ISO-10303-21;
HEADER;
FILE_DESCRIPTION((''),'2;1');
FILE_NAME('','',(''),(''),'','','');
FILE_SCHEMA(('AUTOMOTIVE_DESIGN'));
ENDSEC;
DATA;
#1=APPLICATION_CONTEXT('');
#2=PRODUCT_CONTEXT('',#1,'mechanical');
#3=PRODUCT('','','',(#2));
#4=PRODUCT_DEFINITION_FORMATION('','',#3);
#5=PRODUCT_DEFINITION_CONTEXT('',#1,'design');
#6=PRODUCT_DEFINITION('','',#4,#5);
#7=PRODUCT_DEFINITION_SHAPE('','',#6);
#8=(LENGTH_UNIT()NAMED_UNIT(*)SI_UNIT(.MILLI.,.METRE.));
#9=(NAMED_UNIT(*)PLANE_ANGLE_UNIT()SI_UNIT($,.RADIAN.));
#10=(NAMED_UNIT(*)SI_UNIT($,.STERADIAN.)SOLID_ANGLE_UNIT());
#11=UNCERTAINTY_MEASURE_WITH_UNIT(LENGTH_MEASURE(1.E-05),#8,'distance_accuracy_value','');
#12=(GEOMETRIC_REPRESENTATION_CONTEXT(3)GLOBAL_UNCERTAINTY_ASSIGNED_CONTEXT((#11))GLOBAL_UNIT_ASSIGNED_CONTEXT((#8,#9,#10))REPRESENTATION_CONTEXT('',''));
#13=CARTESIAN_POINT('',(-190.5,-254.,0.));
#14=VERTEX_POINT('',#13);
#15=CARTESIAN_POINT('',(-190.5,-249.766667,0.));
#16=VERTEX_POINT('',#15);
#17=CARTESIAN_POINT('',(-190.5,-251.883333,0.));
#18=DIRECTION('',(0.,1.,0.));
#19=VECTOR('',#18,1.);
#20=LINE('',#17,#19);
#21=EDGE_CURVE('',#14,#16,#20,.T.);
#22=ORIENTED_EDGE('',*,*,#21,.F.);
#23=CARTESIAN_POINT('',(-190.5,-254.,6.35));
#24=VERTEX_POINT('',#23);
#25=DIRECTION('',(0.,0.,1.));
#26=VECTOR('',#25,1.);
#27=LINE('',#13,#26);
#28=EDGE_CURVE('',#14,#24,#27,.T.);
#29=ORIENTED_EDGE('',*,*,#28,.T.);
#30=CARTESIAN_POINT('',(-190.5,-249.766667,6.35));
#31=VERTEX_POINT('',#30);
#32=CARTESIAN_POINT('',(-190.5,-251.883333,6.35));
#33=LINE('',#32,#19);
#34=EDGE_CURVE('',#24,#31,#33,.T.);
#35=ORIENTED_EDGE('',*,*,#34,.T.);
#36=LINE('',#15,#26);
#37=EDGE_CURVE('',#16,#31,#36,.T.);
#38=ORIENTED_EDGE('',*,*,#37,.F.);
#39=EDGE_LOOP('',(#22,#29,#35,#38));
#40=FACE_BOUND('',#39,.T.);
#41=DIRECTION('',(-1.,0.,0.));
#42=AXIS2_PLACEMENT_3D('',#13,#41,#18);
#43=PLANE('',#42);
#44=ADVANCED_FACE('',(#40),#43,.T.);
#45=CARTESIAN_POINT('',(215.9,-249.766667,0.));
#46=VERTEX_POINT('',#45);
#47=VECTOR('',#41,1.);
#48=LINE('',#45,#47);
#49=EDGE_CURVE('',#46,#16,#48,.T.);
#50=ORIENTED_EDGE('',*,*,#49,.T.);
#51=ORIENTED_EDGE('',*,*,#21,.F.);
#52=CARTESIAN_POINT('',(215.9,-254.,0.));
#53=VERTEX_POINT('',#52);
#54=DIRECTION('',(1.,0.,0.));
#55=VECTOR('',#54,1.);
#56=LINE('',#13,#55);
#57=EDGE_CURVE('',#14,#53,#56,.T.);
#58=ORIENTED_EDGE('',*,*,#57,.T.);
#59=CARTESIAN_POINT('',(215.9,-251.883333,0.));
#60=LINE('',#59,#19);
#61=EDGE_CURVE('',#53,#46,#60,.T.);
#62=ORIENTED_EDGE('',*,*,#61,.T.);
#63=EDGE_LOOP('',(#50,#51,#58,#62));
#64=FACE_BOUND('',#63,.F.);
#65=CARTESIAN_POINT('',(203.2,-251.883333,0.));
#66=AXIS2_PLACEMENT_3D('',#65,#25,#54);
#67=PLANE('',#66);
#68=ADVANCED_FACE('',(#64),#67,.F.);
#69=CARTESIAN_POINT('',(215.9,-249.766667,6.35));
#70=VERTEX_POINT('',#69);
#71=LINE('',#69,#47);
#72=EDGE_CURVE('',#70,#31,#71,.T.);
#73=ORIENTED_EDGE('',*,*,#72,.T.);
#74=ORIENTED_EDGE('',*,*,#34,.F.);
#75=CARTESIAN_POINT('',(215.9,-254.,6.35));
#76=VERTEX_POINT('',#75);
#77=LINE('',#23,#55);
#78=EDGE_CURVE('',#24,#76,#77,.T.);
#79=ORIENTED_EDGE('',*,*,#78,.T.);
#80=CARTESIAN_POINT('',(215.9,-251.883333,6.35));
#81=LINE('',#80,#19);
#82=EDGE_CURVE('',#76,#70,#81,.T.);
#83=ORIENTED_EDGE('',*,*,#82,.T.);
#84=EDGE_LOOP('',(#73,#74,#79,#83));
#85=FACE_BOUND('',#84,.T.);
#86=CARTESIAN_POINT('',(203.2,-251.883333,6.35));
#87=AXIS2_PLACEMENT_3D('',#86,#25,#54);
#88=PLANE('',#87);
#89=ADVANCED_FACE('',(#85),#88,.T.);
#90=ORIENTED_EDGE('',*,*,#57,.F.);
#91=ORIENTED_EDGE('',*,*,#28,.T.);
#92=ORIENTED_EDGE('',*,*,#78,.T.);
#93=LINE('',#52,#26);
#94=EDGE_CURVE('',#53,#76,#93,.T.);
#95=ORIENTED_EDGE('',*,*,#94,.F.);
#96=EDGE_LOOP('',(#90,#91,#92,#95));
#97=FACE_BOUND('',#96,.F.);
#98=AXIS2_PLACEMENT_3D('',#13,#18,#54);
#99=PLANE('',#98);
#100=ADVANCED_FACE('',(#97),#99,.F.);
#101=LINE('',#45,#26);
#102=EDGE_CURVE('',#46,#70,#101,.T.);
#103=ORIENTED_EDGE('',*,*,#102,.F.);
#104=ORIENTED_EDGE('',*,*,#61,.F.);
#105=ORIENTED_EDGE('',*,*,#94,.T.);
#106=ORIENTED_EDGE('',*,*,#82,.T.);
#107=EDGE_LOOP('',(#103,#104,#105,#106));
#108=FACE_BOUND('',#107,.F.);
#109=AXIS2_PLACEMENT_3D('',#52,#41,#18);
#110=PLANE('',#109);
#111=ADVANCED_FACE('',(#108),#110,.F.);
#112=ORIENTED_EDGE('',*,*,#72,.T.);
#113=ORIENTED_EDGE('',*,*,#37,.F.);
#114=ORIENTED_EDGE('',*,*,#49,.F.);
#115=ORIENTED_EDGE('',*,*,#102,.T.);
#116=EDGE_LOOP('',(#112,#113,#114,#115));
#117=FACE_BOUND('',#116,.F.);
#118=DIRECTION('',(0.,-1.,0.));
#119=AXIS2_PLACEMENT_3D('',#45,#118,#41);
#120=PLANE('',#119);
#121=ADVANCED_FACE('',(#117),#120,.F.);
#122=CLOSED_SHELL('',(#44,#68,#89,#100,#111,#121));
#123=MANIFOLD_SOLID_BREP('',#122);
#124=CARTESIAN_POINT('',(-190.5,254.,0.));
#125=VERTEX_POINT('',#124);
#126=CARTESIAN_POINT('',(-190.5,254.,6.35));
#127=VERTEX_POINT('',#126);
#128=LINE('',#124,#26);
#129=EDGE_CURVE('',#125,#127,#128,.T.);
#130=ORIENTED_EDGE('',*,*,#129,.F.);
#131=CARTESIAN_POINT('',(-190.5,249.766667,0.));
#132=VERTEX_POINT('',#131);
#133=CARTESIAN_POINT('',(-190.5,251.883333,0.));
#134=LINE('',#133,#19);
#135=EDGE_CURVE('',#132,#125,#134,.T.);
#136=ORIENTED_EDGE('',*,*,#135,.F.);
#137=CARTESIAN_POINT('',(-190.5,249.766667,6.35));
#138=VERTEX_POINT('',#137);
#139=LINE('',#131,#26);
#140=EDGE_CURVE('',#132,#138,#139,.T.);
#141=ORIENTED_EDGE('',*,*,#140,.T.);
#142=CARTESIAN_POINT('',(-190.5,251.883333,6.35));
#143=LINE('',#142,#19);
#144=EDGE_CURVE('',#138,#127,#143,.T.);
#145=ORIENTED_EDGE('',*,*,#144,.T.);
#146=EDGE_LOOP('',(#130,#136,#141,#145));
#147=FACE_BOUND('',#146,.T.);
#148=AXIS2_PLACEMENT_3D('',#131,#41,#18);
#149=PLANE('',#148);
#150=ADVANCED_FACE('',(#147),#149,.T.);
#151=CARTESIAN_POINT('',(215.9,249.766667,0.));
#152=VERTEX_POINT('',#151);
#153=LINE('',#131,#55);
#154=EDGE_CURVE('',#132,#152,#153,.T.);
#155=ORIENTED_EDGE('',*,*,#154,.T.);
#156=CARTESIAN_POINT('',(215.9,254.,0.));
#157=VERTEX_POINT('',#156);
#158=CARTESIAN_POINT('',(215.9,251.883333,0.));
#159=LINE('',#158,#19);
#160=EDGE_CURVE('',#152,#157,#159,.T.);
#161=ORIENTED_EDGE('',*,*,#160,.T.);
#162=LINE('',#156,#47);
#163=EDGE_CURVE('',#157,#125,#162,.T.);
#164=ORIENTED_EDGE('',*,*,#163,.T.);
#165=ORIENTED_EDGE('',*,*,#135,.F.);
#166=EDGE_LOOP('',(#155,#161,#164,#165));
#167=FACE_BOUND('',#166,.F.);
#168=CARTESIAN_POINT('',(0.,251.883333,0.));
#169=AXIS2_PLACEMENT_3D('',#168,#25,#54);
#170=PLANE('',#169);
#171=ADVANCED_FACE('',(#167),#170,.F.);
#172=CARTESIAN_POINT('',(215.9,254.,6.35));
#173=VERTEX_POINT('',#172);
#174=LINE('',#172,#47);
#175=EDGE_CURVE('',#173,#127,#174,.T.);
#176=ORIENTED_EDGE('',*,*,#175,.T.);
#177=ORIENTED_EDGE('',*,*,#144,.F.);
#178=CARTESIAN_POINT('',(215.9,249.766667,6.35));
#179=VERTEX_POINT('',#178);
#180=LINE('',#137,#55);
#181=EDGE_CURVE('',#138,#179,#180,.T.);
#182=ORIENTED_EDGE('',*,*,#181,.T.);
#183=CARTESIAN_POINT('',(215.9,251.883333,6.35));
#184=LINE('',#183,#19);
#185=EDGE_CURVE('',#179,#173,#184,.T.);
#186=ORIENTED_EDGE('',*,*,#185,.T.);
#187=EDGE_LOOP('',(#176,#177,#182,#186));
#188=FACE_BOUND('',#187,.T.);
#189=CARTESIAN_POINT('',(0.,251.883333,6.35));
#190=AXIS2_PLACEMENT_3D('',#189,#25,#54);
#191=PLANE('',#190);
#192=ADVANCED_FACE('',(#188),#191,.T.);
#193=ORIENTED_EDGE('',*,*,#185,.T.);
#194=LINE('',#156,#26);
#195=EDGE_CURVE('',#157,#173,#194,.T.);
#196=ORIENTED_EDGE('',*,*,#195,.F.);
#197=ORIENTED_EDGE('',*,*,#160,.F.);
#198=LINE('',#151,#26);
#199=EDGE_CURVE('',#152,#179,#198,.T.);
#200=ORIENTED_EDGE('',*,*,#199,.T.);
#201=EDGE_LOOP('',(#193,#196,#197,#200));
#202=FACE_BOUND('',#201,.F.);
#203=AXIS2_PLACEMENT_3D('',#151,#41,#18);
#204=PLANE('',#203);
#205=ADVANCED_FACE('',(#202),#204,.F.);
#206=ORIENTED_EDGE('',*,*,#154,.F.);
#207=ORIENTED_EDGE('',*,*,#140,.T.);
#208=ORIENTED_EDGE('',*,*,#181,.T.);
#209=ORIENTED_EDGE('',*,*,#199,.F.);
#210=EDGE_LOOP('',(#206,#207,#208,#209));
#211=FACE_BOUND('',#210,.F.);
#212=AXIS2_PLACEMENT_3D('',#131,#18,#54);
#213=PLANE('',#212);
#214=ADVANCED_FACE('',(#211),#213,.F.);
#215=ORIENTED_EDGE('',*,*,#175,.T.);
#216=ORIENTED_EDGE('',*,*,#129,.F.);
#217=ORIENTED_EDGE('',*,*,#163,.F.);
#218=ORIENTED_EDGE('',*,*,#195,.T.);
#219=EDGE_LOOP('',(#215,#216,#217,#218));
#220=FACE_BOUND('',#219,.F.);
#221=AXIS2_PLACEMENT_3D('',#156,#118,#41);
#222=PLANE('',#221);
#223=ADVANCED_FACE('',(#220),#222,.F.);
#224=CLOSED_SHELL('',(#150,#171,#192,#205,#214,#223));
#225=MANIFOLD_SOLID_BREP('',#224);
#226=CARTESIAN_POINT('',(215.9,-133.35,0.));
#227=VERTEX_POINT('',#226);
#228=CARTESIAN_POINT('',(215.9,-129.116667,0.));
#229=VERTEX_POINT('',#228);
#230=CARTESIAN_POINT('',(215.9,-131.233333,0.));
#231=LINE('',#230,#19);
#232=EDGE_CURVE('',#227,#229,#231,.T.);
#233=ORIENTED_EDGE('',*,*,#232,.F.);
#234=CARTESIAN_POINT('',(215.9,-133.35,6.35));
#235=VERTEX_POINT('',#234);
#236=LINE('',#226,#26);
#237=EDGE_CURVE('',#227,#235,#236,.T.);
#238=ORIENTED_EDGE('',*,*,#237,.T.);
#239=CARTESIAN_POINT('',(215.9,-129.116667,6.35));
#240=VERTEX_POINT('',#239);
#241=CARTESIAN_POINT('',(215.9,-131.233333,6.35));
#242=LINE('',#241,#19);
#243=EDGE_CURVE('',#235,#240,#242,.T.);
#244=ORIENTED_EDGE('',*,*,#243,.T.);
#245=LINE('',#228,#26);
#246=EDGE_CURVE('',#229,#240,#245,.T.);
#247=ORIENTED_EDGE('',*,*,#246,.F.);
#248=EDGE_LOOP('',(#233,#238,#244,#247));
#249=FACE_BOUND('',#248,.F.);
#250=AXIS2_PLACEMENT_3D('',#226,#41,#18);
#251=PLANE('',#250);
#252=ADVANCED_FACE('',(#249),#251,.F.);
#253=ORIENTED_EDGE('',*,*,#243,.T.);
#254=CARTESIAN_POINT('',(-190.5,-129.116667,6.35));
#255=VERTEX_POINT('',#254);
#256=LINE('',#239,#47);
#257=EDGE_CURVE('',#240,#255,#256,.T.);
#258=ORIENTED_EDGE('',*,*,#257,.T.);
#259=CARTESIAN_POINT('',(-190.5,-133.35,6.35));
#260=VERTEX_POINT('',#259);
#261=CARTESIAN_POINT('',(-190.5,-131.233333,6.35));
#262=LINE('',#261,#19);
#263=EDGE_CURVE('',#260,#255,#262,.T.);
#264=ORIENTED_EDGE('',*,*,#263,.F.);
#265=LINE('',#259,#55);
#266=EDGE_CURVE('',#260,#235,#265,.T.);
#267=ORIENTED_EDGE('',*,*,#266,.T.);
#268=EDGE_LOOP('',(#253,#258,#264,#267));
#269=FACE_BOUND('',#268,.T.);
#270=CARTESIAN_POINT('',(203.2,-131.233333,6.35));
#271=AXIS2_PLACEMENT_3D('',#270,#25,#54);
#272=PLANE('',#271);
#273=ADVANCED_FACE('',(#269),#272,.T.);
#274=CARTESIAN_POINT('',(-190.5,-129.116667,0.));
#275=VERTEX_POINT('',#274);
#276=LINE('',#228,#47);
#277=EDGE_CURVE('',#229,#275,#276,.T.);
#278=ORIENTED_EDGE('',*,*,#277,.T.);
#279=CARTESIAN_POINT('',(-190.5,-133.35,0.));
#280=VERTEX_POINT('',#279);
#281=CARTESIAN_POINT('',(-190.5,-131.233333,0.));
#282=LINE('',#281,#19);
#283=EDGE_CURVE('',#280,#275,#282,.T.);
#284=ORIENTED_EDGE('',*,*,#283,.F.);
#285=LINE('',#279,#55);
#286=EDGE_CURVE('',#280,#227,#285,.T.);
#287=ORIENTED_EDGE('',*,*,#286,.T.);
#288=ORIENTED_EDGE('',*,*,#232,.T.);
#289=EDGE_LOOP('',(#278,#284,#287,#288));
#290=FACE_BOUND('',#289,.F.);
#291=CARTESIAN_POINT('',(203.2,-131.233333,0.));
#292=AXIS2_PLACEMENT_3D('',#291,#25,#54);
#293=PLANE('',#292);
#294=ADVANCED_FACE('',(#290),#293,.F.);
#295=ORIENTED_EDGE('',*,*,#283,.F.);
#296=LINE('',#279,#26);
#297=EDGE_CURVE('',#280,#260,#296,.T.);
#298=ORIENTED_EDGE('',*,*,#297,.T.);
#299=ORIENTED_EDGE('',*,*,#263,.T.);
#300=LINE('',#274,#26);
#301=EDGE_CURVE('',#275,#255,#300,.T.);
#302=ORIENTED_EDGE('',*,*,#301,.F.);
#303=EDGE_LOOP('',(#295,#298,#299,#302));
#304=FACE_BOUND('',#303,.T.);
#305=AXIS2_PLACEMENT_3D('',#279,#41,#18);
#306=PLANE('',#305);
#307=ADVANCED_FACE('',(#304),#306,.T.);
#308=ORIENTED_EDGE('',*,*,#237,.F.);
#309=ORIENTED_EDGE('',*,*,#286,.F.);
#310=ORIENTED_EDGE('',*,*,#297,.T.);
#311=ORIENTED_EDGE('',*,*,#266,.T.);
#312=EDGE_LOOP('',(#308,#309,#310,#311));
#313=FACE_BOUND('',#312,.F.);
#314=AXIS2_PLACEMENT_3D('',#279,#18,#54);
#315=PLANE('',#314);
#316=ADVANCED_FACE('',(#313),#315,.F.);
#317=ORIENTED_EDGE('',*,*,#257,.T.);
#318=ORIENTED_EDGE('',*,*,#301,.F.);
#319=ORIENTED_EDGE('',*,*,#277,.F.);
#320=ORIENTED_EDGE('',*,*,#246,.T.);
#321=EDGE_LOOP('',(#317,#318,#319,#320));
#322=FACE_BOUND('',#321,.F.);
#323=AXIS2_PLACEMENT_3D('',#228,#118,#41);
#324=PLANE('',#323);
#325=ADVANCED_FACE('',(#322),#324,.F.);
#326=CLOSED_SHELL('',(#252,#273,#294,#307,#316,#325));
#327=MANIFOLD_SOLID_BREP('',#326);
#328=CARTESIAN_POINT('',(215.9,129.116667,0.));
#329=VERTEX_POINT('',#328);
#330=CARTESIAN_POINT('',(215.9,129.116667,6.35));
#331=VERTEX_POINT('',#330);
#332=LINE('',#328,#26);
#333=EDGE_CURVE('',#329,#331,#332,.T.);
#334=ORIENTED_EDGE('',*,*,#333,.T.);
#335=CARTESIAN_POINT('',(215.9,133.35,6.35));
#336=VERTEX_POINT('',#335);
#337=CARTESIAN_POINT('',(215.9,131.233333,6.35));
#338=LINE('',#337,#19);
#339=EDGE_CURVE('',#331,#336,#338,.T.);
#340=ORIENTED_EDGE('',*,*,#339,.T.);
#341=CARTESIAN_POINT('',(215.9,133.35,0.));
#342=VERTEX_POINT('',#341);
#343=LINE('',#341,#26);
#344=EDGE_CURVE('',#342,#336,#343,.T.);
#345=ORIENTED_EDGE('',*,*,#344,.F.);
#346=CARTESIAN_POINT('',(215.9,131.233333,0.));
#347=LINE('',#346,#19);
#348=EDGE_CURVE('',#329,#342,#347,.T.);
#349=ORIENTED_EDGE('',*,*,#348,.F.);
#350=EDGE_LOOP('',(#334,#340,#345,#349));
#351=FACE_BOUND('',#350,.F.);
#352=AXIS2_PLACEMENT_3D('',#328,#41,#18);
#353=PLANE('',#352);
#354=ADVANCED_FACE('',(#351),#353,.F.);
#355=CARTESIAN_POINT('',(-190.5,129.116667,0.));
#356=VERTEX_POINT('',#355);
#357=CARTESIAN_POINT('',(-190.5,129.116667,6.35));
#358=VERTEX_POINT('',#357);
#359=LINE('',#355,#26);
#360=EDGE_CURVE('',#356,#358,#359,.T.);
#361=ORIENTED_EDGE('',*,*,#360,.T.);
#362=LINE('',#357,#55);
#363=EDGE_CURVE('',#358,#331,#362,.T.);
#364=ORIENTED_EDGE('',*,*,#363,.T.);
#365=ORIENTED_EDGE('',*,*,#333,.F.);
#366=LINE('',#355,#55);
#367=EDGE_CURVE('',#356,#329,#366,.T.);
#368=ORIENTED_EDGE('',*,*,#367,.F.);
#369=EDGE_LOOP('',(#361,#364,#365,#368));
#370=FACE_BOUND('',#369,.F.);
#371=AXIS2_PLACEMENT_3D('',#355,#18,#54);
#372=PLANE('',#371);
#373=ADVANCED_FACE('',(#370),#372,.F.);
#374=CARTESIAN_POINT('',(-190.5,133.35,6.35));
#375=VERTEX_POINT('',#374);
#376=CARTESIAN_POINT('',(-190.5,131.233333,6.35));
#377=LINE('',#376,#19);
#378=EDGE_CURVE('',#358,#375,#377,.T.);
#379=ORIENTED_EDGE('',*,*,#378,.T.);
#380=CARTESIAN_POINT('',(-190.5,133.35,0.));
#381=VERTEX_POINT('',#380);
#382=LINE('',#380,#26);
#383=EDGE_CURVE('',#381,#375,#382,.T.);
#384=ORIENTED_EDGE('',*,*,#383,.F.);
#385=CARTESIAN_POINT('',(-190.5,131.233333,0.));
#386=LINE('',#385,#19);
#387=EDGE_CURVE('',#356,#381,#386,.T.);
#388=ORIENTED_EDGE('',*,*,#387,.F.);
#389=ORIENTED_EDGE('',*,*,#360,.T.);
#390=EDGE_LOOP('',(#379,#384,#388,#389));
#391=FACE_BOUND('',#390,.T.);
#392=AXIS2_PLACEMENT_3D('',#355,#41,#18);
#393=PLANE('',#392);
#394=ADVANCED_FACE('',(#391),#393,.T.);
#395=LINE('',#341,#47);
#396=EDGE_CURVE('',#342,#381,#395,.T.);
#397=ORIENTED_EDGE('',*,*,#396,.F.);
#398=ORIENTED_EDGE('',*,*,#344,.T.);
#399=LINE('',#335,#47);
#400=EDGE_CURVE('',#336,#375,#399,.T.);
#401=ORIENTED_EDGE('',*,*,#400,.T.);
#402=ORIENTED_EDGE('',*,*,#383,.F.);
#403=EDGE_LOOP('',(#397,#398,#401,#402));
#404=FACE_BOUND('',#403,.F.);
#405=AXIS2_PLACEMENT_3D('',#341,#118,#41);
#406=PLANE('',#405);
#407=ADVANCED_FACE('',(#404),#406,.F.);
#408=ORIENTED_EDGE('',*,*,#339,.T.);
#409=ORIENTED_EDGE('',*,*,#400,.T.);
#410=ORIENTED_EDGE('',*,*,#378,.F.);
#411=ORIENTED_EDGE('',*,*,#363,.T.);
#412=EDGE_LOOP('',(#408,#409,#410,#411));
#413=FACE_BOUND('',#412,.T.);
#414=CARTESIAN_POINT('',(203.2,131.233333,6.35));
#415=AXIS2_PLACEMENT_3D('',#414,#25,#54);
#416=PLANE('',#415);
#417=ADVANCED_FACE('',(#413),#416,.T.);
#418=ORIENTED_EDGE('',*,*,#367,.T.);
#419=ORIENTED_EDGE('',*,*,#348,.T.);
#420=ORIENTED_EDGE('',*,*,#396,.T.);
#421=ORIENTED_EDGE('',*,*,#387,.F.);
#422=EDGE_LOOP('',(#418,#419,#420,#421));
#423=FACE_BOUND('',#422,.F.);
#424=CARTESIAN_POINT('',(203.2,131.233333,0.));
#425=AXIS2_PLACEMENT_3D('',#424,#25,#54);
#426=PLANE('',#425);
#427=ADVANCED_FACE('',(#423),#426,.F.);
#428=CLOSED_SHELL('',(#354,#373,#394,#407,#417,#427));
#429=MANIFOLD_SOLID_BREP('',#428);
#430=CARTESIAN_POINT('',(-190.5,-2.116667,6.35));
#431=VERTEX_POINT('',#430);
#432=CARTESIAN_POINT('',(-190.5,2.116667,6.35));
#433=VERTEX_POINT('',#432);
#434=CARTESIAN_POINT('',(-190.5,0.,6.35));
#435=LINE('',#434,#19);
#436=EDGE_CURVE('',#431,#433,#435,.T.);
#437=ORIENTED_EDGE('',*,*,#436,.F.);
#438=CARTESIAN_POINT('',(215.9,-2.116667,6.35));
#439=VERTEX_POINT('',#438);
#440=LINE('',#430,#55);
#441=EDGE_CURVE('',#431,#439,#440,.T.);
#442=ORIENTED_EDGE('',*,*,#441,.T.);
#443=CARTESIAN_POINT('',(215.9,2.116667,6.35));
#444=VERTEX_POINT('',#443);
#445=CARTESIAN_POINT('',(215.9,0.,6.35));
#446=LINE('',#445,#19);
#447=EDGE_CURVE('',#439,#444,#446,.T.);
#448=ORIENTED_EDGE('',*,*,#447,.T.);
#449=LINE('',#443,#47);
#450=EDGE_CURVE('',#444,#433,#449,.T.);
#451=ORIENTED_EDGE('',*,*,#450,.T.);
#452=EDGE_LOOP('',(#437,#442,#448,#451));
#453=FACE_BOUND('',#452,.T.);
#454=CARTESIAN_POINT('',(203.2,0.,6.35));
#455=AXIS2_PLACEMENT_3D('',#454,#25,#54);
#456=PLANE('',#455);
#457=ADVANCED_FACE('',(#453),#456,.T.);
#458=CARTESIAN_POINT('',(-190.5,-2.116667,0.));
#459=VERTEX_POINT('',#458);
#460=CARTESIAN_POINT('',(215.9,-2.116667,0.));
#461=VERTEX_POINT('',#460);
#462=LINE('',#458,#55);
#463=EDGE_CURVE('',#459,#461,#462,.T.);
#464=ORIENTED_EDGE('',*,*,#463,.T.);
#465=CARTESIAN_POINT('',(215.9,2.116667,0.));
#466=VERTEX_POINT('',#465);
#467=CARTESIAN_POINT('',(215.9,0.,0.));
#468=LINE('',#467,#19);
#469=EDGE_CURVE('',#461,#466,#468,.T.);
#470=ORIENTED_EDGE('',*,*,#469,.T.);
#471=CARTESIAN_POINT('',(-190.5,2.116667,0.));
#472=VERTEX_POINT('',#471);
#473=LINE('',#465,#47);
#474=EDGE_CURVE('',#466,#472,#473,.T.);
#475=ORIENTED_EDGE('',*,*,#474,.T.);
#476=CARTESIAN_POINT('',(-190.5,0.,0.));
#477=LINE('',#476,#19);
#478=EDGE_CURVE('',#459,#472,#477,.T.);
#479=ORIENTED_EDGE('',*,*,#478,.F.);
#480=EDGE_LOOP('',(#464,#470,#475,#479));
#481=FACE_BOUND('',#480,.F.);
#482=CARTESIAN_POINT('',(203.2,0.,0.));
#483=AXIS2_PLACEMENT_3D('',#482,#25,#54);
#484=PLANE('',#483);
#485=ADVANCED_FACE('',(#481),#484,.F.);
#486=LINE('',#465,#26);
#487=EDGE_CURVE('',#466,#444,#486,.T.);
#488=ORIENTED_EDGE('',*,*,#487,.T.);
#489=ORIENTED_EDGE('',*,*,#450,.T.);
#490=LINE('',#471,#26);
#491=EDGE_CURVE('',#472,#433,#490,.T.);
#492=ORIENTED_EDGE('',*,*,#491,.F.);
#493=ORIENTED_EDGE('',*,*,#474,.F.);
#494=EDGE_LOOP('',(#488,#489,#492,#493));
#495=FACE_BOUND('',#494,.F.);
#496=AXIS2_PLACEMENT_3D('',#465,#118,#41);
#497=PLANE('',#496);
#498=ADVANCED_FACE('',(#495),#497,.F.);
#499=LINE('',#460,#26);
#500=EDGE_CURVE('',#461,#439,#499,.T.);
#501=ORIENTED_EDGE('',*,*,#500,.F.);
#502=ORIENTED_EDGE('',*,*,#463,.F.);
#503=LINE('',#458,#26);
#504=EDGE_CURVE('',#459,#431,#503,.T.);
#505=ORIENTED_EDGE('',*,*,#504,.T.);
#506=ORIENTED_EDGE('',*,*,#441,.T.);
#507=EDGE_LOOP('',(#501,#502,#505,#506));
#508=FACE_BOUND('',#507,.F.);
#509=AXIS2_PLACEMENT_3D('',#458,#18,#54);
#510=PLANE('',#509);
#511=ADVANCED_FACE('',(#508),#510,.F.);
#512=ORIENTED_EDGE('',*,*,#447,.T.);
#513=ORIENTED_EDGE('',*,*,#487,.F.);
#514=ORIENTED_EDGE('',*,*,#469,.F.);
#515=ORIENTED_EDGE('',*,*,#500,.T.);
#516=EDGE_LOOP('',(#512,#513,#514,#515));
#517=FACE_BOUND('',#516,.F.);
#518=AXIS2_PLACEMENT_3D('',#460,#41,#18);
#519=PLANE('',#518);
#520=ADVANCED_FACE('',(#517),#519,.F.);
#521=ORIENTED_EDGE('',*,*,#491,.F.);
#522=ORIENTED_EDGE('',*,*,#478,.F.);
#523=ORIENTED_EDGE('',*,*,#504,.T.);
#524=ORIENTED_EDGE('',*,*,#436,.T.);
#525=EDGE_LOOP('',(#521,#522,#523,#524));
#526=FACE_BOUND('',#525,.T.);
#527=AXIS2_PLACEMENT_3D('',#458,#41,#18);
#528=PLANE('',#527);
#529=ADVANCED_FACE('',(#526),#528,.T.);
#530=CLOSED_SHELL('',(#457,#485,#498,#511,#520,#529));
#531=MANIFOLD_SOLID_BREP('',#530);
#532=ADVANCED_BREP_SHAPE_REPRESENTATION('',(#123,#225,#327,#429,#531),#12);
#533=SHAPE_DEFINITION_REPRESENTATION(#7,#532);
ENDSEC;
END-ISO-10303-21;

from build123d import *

# Parameters (mm, degrees)
F0_W     = 381
F0_H     = 4.2333333333
F0_W_2   = 25.4
F1_DEPTH = 6.35


with BuildPart() as f1:
    # F0 (on Top) → F1 (new body)
    with BuildSketch(Plane.XY):
        with Locations((0, 251.8833333333)):
            Rectangle(F0_W, F0_H)
        with Locations((203.2, 251.8833333333)):
            Rectangle(F0_W_2, F0_H)
    extrude(amount=F1_DEPTH)


with BuildPart() as f1b:
    # F0 (on Top) → F1, piece 2 (new body)
    with BuildSketch(Plane.XY):
        with Locations((203.2, 131.2333333333)):
            Rectangle(F0_W_2, F0_H)
        with Locations((0, 131.2333333333)):
            Rectangle(F0_W, F0_H)
    extrude(amount=F1_DEPTH)


with BuildPart() as f1c:
    # F0 (on Top) → F1, piece 3 (new body)
    with BuildSketch(Plane.XY):
        with Locations((203.2, 0)):
            Rectangle(F0_W_2, F0_H)
        Rectangle(F0_W, F0_H)
    extrude(amount=F1_DEPTH)


with BuildPart() as f1d:
    # F0 (on Top) → F1, piece 4 (new body)
    with BuildSketch(Plane.XY):
        with Locations((203.2, -131.2333333333)):
            Rectangle(F0_W_2, F0_H)
        with Locations((0, -131.2333333333)):
            Rectangle(F0_W, F0_H)
    extrude(amount=F1_DEPTH)


with BuildPart() as f1e:
    # F0 (on Top) → F1, piece 5 (new body)
    with BuildSketch(Plane.XY):
        with Locations((203.2, -251.8833333333)):
            Rectangle(F0_W_2, F0_H)
        with Locations((0, -251.8833333333)):
            Rectangle(F0_W, F0_H)
    extrude(amount=F1_DEPTH)


solid = Compound([f1.part, f1b.part, f1c.part, f1d.part, f1e.part])
